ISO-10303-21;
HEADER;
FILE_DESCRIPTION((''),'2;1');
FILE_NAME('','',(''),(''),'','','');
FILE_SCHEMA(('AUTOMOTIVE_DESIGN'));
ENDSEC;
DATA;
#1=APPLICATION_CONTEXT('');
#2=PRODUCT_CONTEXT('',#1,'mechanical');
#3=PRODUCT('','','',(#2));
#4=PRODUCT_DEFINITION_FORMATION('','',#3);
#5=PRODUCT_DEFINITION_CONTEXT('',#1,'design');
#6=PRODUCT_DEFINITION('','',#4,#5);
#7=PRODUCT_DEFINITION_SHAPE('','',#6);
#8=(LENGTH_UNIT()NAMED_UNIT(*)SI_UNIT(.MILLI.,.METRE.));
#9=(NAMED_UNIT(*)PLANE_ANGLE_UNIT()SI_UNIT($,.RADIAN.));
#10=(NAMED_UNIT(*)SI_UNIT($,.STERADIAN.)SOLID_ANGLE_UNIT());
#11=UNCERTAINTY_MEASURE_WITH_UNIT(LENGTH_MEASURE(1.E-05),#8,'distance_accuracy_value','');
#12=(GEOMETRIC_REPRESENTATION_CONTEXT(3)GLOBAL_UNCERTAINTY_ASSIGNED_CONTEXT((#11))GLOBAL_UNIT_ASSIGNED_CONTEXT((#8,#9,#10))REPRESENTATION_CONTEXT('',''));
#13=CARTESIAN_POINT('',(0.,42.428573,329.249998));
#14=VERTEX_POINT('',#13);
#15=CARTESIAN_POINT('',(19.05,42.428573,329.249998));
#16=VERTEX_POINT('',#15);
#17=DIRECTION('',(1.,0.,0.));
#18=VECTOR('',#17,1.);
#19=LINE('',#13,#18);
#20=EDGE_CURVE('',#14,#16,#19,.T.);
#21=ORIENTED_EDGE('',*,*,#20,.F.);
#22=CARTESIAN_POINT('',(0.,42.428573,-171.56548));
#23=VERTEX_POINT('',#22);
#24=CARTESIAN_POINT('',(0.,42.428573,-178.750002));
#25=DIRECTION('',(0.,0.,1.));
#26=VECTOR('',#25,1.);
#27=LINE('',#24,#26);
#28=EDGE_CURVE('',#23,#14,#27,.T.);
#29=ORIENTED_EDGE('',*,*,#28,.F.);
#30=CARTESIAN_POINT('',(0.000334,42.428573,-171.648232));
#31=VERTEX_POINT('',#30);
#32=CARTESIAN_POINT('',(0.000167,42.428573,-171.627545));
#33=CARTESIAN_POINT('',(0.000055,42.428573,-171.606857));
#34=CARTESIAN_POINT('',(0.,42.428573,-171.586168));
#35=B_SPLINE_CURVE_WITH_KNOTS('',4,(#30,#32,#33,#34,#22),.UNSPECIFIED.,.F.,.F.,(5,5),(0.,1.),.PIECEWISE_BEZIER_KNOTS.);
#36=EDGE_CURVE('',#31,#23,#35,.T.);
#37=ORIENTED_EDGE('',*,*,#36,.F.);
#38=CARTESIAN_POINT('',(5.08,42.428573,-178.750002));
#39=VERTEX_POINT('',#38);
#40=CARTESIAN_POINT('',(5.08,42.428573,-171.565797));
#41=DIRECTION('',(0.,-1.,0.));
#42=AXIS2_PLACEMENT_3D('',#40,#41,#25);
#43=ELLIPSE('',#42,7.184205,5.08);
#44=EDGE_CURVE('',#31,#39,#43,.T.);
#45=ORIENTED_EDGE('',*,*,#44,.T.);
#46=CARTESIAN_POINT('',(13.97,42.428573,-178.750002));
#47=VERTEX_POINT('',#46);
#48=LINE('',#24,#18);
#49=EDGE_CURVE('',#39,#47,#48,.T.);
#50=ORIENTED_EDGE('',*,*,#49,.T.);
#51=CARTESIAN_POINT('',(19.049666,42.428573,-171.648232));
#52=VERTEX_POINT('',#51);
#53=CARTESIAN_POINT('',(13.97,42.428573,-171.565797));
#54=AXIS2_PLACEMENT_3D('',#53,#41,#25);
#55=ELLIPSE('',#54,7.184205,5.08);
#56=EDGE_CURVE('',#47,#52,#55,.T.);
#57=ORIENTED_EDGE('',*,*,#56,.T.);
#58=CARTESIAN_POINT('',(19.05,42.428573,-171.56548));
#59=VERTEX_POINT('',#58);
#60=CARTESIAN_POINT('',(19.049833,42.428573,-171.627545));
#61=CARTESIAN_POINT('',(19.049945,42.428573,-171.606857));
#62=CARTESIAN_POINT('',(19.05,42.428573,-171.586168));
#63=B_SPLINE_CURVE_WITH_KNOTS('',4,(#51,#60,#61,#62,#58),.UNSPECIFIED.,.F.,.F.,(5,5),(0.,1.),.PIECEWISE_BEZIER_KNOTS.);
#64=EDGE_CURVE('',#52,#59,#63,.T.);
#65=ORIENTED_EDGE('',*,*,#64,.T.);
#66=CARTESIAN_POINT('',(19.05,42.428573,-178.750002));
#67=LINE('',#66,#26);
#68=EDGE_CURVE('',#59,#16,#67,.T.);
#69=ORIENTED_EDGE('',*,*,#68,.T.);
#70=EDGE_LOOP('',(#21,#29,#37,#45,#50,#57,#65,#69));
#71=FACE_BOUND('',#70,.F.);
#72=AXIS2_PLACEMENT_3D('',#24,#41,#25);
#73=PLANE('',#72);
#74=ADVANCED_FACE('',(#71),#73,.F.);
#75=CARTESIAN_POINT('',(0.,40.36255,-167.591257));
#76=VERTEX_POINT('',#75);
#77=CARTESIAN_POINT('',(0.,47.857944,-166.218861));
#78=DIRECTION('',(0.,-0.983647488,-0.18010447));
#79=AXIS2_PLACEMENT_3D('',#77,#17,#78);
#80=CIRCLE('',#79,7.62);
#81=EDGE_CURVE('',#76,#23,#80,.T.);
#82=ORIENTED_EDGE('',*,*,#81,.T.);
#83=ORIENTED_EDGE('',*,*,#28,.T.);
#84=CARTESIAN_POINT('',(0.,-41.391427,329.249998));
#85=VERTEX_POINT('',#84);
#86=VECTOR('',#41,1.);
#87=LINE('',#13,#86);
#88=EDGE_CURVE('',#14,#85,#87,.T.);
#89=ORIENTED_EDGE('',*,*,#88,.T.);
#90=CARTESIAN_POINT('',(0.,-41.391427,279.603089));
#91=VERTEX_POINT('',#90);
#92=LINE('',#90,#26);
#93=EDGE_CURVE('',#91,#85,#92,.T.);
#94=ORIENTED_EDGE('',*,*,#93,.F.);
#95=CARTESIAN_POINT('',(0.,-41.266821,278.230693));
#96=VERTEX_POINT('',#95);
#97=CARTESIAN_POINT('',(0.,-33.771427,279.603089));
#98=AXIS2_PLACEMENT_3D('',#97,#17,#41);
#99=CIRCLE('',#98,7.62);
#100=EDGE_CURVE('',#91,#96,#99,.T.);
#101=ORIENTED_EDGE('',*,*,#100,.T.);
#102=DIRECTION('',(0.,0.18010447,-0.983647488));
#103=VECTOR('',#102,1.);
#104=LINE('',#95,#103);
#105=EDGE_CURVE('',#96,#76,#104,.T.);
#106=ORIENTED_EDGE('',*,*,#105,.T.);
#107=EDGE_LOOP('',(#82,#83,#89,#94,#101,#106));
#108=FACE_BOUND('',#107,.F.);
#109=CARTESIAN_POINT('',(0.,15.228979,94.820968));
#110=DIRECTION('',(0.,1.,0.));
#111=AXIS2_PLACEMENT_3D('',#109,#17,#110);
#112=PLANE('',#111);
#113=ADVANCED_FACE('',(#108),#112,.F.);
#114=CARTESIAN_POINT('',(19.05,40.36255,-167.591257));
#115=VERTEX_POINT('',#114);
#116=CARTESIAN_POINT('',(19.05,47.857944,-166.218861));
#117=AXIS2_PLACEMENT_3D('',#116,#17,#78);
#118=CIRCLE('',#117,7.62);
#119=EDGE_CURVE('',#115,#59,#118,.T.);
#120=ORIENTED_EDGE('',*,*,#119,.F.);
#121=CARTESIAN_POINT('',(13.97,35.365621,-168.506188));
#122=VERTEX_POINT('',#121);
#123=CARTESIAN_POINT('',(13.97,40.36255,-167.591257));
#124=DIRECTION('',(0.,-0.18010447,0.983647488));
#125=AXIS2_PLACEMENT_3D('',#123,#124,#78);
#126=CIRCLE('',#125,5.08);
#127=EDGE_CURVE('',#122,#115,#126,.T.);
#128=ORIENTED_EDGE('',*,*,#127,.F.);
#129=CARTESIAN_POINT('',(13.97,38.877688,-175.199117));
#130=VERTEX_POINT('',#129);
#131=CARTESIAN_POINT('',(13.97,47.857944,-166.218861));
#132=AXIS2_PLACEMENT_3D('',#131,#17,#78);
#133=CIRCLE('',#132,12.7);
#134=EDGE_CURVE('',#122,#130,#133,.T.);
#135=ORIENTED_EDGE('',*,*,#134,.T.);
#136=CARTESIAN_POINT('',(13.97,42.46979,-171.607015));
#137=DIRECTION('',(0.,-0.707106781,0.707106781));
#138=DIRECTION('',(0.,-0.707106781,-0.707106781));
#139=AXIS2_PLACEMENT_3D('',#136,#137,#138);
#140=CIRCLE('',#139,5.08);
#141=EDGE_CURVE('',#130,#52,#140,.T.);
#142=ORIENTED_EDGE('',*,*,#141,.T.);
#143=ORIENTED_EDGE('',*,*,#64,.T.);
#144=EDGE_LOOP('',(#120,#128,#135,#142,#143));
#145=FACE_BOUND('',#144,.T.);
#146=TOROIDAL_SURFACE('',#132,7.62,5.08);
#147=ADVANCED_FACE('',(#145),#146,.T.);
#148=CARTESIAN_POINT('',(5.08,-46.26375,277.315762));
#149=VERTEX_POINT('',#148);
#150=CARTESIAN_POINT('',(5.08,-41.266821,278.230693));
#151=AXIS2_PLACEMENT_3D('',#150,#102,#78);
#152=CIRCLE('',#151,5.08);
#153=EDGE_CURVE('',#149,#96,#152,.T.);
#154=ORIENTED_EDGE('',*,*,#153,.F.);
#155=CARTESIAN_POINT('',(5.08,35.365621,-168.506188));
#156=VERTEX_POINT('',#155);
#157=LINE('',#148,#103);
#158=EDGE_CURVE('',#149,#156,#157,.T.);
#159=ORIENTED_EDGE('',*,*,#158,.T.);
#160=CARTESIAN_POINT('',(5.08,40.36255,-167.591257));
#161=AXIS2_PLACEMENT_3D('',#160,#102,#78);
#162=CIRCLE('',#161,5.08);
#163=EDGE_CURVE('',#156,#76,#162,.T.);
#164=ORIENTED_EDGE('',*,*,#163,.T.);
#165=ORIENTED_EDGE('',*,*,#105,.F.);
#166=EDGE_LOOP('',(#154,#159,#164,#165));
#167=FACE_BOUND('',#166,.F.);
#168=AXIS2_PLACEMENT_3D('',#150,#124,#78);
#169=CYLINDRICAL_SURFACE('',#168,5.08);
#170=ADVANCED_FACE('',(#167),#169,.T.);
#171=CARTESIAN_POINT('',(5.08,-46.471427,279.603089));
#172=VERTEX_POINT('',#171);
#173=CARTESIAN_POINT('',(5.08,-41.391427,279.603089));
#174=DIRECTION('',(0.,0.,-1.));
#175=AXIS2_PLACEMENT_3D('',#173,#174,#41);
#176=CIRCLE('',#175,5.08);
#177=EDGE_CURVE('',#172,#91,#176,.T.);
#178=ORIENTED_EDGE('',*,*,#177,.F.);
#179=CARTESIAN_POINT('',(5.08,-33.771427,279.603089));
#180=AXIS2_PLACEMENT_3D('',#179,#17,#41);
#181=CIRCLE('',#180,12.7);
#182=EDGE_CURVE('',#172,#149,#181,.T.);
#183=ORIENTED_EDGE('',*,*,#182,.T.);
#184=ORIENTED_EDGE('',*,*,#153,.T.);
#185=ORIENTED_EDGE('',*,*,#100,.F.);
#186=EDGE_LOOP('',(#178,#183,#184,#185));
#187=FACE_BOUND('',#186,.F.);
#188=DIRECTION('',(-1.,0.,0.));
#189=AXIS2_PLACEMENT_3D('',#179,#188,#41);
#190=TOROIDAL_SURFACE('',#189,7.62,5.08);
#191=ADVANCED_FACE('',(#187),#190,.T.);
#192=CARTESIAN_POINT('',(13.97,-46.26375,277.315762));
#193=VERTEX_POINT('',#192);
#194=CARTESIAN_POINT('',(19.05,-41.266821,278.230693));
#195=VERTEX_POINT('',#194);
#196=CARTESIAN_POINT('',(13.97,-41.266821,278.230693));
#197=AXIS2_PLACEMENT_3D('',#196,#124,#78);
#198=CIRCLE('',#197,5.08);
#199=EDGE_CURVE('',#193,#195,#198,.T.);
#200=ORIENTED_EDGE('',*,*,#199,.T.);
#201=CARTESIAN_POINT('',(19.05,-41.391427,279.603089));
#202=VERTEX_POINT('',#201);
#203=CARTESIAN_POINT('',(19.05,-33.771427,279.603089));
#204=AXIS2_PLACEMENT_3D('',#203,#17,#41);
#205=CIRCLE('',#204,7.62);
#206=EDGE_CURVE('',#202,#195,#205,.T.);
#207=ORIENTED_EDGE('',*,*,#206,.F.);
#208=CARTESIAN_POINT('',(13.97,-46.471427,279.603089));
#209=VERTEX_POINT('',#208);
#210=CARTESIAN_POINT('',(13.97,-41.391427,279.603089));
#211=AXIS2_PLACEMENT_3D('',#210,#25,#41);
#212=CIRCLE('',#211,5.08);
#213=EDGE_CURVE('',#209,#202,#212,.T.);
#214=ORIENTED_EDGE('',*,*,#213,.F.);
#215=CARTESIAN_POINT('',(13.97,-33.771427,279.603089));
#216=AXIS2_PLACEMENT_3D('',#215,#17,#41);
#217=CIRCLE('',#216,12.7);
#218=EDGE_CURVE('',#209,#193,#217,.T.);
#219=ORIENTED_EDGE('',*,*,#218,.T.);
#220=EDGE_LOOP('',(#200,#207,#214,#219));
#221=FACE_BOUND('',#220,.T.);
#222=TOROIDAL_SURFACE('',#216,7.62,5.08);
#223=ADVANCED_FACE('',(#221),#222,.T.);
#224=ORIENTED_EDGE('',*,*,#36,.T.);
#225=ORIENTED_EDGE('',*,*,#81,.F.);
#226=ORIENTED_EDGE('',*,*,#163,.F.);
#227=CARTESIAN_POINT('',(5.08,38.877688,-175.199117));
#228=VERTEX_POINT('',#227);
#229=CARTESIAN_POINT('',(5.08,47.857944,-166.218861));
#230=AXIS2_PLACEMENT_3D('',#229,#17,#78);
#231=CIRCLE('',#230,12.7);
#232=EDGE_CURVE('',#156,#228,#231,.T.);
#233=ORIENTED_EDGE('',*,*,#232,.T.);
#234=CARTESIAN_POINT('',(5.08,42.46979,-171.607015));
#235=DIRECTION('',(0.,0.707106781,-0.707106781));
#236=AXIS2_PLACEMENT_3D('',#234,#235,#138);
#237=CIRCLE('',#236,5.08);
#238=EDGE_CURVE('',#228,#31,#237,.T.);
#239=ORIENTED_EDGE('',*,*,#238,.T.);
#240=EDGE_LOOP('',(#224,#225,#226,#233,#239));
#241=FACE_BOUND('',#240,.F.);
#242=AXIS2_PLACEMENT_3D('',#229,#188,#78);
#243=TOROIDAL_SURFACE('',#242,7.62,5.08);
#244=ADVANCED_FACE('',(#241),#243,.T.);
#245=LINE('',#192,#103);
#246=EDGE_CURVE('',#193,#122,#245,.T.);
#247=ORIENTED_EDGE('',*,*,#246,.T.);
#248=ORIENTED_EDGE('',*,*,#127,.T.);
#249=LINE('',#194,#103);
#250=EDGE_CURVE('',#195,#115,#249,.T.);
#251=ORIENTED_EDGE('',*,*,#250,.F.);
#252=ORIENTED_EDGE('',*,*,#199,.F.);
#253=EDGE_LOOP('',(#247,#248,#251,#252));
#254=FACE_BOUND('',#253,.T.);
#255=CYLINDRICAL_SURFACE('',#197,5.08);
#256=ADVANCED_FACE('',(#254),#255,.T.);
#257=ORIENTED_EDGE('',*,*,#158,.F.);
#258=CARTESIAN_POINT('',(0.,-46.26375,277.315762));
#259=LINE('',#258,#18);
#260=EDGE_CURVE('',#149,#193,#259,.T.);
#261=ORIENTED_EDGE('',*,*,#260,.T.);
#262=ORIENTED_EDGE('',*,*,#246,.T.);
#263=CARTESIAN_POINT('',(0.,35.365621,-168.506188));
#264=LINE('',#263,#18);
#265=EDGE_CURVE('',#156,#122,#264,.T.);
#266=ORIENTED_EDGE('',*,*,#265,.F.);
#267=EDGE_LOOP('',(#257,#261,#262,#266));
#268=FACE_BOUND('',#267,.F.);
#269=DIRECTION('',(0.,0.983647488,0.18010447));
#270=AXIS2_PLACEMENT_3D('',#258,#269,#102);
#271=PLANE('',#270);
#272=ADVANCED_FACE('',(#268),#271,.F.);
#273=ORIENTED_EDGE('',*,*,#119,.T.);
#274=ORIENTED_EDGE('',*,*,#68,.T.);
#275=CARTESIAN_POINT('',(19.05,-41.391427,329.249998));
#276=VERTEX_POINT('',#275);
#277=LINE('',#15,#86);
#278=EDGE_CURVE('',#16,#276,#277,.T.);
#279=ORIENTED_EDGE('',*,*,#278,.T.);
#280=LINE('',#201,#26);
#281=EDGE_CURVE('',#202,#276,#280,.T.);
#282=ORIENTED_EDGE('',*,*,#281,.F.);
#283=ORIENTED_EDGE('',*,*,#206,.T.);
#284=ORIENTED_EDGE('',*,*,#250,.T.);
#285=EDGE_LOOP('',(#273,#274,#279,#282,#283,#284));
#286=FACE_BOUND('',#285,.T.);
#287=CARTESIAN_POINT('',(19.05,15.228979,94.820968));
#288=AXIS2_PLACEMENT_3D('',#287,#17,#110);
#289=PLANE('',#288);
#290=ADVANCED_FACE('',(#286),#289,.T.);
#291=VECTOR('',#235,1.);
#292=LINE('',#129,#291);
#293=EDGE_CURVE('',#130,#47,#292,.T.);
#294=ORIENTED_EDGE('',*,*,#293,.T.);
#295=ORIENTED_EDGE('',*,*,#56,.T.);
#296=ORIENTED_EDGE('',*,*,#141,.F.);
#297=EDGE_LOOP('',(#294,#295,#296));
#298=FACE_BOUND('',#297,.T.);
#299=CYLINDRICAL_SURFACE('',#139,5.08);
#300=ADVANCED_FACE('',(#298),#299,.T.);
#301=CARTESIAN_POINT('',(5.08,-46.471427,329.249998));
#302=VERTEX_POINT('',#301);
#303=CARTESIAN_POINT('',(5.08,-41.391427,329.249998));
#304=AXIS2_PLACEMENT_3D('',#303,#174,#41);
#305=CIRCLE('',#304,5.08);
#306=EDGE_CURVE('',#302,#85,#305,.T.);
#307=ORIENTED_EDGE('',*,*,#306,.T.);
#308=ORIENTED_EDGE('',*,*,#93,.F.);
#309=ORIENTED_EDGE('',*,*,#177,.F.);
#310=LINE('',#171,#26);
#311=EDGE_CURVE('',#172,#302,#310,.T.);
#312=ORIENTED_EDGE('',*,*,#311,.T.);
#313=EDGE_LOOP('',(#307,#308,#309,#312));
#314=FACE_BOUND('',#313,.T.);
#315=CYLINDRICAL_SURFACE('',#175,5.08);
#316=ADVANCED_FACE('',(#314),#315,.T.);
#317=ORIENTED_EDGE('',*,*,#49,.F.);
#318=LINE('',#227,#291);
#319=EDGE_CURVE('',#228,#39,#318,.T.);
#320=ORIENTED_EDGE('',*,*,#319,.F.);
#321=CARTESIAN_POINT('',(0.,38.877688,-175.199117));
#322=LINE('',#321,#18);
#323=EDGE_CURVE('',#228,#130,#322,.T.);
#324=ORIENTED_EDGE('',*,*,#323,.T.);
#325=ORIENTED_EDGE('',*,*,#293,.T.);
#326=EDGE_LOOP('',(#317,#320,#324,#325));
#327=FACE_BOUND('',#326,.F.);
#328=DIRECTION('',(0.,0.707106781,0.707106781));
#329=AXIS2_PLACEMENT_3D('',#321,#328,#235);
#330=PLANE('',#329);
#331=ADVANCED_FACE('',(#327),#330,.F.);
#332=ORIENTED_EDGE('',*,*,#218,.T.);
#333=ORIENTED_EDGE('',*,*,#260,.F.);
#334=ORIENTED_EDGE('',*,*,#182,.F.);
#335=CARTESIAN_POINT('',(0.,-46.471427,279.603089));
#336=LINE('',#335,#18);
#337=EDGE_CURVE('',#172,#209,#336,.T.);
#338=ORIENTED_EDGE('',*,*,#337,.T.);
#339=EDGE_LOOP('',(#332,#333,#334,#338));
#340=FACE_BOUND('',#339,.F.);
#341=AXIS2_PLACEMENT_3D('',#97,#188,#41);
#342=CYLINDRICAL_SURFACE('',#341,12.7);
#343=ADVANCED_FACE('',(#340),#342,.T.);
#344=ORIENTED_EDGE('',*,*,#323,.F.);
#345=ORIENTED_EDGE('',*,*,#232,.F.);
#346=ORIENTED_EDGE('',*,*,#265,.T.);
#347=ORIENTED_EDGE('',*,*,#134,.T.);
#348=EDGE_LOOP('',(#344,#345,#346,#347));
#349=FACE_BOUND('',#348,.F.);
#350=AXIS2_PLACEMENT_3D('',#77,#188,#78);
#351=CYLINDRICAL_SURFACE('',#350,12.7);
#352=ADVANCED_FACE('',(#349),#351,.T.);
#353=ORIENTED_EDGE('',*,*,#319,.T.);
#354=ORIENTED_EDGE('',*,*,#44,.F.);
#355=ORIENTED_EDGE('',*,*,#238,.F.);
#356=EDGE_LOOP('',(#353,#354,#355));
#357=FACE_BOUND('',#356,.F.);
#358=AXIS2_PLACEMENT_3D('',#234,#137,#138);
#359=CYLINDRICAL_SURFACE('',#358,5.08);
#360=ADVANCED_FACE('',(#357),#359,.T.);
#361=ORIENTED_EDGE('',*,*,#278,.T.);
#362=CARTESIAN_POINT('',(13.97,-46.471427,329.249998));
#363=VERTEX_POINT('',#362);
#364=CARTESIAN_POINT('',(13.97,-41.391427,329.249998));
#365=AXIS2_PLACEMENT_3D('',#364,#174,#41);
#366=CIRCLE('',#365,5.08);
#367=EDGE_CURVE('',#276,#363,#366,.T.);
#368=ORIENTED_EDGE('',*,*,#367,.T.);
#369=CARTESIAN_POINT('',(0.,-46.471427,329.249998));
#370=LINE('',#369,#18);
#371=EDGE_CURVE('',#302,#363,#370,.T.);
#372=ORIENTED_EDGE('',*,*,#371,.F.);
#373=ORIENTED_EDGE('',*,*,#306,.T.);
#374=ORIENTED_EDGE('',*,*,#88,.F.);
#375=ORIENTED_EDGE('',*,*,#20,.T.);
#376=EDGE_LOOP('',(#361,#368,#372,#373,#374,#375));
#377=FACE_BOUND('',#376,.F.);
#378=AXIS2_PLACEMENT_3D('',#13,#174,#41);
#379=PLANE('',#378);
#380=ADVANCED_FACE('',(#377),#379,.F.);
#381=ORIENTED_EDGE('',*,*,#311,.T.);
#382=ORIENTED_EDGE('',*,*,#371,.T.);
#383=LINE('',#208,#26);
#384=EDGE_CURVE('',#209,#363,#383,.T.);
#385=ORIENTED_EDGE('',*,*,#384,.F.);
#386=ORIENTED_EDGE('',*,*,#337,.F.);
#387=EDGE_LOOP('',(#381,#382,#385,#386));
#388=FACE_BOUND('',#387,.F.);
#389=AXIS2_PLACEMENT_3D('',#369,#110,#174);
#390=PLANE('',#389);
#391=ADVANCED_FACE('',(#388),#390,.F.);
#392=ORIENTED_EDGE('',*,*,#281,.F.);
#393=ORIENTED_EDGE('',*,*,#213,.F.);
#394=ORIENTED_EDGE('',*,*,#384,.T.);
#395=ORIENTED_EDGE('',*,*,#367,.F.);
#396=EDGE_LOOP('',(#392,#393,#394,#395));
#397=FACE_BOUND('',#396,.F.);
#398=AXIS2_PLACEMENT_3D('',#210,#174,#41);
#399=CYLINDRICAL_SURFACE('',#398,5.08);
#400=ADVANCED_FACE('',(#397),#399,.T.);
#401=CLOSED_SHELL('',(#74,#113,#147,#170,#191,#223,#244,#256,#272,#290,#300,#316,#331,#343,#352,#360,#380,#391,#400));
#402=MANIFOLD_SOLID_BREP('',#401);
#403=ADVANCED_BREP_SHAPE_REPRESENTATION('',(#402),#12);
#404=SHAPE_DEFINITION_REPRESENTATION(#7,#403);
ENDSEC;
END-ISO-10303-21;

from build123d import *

# Parameters (mm, degrees)
F1_DEPTH     = 19.05
F2_T1_DEPTH  = 453.2334559577
F2_T3_DEPTH  = 17.7217096423
F2_T5_DEPTH  = 62.3469086479
F2_T8_ANGLE  = 10.3758449201
F2_T10_ANGLE = 34.6241550799
F2_T12_ANGLE = 10.3758449201
F2_T14_ANGLE = 34.6241550799


# Not quite as in the source:
# - a fillet or chamfer that OpenCascade refuses, or shapes differently, is made with other operations: its cross-section is extruded or revolved along the edge and cut away or added


with BuildPart() as f1:
    # F0 (on Right) → F1 (new body)
    with BuildSketch(Plane.YZ):
        with BuildLine():
            Line((42.4285726043, -178.7500022879), (42.4285726043, 329.2499977121))
            Line((42.4285726043, 329.2499977121), (-46.4714273957, 329.2499977121))
            Line((-46.4714273957, 329.2499977121), (-46.4714273957, 279.6030890642))
            ThreePointArc((-46.4714273957, 279.6030890642), (-46.4194016068, 278.4547213725), (-46.2637504894, 277.3157623006))
            Line((-46.2637504894, 277.3157623006), (35.3656206904, -168.5061879892))
            ThreePointArc((35.3656206904, -168.5061879892), (36.6122005726, -172.1199848152), (38.877687663, -175.1991173466))
            Line((38.877687663, -175.1991173466), (42.4285726043, -178.7500022879))
        make_face()
    extrude(amount=F1_DEPTH)

    # F2: fillet of radius 5.08 on 2 edges, made by hand

    # F2_s2 → F2_t1 (cut)
    with BuildSketch(Plane(origin=(0, -50.6297547862, 276.5163530631), x_dir=(1, 0, 0), z_dir=(0, 0.1801044696, -0.9836474877))):
        with BuildLine():
            ThreePointArc((13.97, -4.4385863345), (17.5621024484, -5.9264838861), (19.05, -9.5185863345))
            Line((19.05, -9.5185863345), (19.05, -4.4385863345))
            Line((19.05, -4.4385863345), (13.97, -4.4385863345))
        make_face()
        with BuildLine():
            ThreePointArc((5.08, -4.4385863345), (1.4878975516, -5.9264838861), (0, -9.5185863345))
            Line((0, -9.5185863345), (0, -4.4385863345))
            Line((0, -4.4385863345), (5.08, -4.4385863345))
        make_face()
    extrude(amount=F2_T1_DEPTH, mode=Mode.SUBTRACT)

    # F2_s4 → F2_t3 (cut)
    with BuildSketch(Plane(origin=(0, 107.0384025048, -107.0384025048), x_dir=(1, 0, 0), z_dir=(0, 0.7071067812, -0.7071067812))):
        with BuildLine():
            ThreePointArc((5.08, 96.3938073503), (1.4878975516, 94.9059097987), (0, 91.3138073503))
            Line((0, 91.3138073503), (0, 96.3938073503))
            Line((0, 96.3938073503), (5.08, 96.3938073503))
        make_face()
        with BuildLine():
            ThreePointArc((13.97, 96.3938073503), (17.5621024484, 94.9059097987), (19.05, 91.3138073503))
            Line((19.05, 91.3138073503), (19.05, 96.3938073503))
            Line((19.05, 96.3938073503), (13.97, 96.3938073503))
        make_face()
    extrude(amount=F2_T3_DEPTH, mode=Mode.SUBTRACT)

    # F2_s6 → F2_t5 (cut)
    with BuildSketch(Plane.XY.offset(279.6030890642)):
        with BuildLine():
            ThreePointArc((5.08, -46.4714273957), (1.4878975516, -44.9835298442), (0, -41.3914273957))
            Line((0, -41.3914273957), (0, -46.4714273957))
            Line((0, -46.4714273957), (5.08, -46.4714273957))
        make_face()
        with BuildLine():
            ThreePointArc((13.97, -46.4714273957), (17.5621024484, -44.9835298442), (19.05, -41.3914273957))
            Line((19.05, -41.3914273957), (19.05, -46.4714273957))
            Line((19.05, -46.4714273957), (13.97, -46.4714273957))
        make_face()
    extrude(amount=F2_T5_DEPTH, mode=Mode.SUBTRACT)

    # F2_s7 → F2_t8 (revolve, cut)
    with BuildSketch(Plane.XY.offset(279.6030890642)):
        with BuildLine():
            ThreePointArc((5.08, -46.4714273957), (1.4878975516, -44.9835298442), (0, -41.3914273957))
            Line((0, -41.3914273957), (0, -46.4714273957))
            Line((0, -46.4714273957), (5.08, -46.4714273957))
        make_face()
    revolve(axis=Axis((0, -33.7714273957, 279.6030890642), (1, 0, 0)), revolution_arc=F2_T8_ANGLE, mode=Mode.SUBTRACT)

    # F2_s9 → F2_t10 (revolve, cut)
    with BuildSketch(Plane(origin=(0, 30.9996163936, -169.3055972266), x_dir=(1, 0, 0), z_dir=(0, -0.1801044696, 0.9836474877))):
        with BuildLine():
            ThreePointArc((5.08, 4.4385863345), (1.4878975516, 5.9264838861), (0, 9.5185863345))
            Line((0, 9.5185863345), (0, 4.4385863345))
            Line((0, 4.4385863345), (5.08, 4.4385863345))
        make_face()
    revolve(axis=Axis((0, 47.8579437841, -166.2188612255), (1, 0, 0)), revolution_arc=F2_T10_ANGLE, mode=Mode.SUBTRACT)

    # F2_s11 → F2_t12 (revolve, cut)
    with BuildSketch(Plane.XY.offset(279.6030890642)):
        with BuildLine():
            ThreePointArc((13.97, -46.4714273957), (17.5621024484, -44.9835298442), (19.05, -41.3914273957))
            Line((19.05, -41.3914273957), (19.05, -46.4714273957))
            Line((19.05, -46.4714273957), (13.97, -46.4714273957))
        make_face()
    revolve(axis=Axis((19.05, -33.7714273957, 279.6030890642), (1, 0, 0)), revolution_arc=F2_T12_ANGLE, mode=Mode.SUBTRACT)

    # F2_s13 → F2_t14 (revolve, cut)
    with BuildSketch(Plane(origin=(0, 30.9996163936, -169.3055972266), x_dir=(1, 0, 0), z_dir=(0, -0.1801044696, 0.9836474877))):
        with BuildLine():
            ThreePointArc((13.97, 4.4385863345), (17.5621024484, 5.9264838861), (19.05, 9.5185863345))
            Line((19.05, 9.5185863345), (19.05, 4.4385863345))
            Line((19.05, 4.4385863345), (13.97, 4.4385863345))
        make_face()
    revolve(axis=Axis((19.05, 47.8579437841, -166.2188612255), (1, 0, 0)), revolution_arc=F2_T14_ANGLE, mode=Mode.SUBTRACT)


solid = f1.part
